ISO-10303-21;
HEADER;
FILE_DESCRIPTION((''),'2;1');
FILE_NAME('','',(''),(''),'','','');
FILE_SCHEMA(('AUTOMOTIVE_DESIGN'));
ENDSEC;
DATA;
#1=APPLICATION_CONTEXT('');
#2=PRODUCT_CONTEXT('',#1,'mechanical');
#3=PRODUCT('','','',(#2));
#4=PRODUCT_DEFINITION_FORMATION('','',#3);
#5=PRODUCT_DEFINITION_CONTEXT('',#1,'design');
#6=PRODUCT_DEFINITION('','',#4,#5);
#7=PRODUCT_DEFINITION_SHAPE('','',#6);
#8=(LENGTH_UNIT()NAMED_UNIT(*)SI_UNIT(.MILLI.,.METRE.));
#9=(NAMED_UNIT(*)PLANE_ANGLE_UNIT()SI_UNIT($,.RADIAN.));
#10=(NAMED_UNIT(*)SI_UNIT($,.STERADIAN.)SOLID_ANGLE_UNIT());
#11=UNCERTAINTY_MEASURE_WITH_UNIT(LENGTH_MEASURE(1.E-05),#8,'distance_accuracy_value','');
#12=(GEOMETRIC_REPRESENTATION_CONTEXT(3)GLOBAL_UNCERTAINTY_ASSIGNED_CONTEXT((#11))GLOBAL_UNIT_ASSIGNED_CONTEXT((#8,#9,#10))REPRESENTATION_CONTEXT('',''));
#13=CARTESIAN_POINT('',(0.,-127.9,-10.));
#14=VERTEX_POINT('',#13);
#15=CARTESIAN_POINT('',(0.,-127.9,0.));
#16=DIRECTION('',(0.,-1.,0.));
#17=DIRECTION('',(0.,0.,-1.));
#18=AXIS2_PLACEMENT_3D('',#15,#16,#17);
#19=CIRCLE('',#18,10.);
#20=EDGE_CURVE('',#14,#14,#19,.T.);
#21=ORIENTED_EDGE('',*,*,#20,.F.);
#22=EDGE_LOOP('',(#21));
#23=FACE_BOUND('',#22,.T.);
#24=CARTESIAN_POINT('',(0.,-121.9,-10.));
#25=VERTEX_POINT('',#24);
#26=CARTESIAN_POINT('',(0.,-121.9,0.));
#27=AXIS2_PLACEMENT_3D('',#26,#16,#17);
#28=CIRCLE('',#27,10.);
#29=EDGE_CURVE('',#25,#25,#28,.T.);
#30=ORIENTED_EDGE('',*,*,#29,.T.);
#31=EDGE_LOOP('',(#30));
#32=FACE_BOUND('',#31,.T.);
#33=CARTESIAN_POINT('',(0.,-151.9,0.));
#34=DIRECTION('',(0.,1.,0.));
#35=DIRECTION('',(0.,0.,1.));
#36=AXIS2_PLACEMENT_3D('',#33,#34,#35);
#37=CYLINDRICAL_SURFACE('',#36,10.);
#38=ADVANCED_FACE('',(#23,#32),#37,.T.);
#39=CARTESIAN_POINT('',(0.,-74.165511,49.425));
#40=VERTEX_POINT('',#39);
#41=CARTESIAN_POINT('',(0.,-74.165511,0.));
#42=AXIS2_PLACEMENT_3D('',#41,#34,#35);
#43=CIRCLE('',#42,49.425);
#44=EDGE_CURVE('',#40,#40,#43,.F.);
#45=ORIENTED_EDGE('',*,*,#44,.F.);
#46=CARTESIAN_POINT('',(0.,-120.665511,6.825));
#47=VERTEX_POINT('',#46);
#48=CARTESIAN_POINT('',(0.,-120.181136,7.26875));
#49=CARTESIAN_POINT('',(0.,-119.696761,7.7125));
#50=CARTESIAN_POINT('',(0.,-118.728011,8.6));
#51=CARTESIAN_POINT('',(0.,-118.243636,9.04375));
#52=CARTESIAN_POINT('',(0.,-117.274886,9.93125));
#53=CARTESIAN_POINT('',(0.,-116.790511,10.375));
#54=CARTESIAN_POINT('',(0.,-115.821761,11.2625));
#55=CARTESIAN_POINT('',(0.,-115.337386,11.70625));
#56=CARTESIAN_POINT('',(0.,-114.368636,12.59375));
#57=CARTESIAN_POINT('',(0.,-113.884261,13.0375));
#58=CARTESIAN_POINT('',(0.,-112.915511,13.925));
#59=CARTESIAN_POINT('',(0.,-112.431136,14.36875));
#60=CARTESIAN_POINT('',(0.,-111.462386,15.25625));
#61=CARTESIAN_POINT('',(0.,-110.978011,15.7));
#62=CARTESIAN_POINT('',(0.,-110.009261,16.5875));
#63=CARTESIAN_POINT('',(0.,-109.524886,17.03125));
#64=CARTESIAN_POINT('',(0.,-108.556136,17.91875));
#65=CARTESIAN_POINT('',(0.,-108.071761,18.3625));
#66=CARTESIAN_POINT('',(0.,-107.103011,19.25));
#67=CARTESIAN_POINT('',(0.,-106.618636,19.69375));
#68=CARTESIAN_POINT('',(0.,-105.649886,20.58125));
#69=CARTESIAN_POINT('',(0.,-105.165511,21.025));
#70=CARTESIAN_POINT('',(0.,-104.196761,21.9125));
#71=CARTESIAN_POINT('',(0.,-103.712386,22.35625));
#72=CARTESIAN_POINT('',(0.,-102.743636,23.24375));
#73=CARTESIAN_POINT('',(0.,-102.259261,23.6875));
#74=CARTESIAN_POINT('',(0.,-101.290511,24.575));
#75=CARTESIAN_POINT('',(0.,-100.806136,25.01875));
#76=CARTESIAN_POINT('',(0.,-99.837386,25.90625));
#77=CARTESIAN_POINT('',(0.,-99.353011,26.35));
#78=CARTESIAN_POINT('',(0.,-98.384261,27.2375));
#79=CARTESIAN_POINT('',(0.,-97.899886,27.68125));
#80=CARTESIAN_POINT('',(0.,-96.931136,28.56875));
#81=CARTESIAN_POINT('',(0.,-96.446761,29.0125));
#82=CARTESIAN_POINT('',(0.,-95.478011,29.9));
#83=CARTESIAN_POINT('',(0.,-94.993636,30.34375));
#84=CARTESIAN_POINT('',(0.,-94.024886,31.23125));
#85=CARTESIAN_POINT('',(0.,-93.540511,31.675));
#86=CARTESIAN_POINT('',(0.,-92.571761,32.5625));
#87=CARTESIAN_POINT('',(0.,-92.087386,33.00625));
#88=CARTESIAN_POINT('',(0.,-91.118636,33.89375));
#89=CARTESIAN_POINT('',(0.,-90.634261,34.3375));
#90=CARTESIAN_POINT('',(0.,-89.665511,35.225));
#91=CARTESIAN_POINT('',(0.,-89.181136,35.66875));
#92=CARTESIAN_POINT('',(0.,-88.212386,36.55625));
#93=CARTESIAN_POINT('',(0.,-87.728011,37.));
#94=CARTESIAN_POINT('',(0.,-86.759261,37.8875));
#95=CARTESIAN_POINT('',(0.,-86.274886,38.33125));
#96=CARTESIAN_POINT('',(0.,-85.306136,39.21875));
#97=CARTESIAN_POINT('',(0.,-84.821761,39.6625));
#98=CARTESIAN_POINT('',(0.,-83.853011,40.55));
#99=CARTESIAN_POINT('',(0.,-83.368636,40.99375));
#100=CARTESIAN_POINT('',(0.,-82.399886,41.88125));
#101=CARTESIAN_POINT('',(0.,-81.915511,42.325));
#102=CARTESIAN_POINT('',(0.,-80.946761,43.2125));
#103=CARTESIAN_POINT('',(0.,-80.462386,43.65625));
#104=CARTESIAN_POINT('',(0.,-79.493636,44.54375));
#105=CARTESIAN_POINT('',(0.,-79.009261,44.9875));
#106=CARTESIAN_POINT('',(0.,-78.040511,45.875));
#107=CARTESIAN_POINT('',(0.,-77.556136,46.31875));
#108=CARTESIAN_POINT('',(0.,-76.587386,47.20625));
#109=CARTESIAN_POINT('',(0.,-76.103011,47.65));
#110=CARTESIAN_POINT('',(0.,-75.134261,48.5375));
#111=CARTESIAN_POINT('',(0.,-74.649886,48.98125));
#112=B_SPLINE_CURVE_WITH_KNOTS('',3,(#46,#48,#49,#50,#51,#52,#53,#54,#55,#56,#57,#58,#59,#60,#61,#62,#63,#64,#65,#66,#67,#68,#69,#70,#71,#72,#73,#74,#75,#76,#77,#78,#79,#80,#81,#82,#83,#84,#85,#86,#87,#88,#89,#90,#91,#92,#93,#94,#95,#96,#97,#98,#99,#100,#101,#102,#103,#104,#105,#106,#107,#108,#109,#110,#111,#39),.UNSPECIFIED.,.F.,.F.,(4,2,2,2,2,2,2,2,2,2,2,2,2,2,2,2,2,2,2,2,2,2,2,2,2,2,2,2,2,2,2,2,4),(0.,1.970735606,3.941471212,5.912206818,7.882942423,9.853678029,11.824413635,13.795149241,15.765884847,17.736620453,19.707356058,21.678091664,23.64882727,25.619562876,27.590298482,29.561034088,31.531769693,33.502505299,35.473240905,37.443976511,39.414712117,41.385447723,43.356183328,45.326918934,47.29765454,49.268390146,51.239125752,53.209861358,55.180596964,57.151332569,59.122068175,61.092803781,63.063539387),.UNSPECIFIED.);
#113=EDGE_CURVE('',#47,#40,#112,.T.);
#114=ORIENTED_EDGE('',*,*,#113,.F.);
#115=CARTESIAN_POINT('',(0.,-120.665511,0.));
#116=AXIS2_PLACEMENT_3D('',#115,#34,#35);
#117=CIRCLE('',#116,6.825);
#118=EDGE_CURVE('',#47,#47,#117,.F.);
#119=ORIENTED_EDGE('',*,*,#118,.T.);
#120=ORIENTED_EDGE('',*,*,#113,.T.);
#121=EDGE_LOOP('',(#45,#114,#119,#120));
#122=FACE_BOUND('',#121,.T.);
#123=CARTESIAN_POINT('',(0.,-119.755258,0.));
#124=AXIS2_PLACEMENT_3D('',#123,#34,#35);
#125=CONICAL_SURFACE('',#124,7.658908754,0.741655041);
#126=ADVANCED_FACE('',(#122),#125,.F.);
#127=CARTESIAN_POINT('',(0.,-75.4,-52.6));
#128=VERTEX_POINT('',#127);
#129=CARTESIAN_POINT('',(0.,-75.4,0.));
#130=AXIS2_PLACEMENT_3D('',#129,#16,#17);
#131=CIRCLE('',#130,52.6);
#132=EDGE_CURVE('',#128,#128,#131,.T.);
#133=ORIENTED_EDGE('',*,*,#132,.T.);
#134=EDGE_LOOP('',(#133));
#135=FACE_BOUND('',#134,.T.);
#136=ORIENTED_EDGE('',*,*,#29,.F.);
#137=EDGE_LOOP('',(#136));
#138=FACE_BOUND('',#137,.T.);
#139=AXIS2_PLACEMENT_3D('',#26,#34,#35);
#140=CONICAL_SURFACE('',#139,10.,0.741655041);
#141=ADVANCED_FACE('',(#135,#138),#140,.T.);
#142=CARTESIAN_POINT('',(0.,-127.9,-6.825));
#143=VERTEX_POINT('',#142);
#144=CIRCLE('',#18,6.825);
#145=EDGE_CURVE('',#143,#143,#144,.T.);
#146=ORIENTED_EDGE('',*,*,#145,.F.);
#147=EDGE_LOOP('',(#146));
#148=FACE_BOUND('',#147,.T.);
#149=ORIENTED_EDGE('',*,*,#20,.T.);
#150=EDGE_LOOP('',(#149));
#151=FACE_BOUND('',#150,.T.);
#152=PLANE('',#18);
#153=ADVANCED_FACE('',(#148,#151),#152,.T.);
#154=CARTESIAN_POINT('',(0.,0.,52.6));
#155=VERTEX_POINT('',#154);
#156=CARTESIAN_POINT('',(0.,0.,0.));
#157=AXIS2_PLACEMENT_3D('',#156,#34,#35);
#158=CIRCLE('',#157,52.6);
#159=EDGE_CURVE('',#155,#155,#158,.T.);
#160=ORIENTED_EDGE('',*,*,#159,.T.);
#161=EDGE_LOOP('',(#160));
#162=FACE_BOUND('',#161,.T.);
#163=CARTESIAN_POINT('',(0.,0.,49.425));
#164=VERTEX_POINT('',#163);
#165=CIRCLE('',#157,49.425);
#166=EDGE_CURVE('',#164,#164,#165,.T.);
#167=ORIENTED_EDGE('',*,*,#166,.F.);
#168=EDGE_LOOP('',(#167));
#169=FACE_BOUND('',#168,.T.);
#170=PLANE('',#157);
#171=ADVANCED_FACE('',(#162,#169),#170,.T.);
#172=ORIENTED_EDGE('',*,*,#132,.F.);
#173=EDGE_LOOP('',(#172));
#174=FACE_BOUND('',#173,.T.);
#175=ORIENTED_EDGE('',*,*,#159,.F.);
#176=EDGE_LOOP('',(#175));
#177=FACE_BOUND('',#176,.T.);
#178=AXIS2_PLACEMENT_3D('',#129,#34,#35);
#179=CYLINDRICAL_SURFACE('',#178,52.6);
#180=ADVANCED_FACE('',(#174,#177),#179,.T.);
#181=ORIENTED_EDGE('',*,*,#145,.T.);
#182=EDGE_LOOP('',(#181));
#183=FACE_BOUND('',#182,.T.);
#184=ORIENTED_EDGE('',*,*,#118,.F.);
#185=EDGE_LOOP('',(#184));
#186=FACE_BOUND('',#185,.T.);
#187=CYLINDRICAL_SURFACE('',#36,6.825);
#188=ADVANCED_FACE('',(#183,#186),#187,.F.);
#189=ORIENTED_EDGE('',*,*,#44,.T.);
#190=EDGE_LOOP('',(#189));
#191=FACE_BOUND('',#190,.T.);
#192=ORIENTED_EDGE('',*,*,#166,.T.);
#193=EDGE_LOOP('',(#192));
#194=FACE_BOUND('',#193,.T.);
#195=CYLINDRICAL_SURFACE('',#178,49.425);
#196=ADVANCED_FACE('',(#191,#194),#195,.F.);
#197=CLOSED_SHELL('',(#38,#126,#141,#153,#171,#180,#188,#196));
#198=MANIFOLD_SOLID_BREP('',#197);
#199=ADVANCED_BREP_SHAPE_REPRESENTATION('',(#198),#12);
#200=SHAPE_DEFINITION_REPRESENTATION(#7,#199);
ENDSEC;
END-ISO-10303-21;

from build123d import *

# Parameters (mm, degrees)
CROQUIS1_R              = 52.6
SALIENTE_EXTRUIR1_DEPTH = 75.4
CROQUIS3_R              = 10
CROQUIS2_R              = 52.6
CROQUIS4_R              = 10
SALIENTE_EXTRUIR2_DEPTH = 30
CROQUIS7_R              = 17.5
CORTAR_EXTRUIR2_DEPTH   = 24


# Read off the part's stored shape, not the designer's step: Vaciado2
with BuildPart() as part:
    # Croquis1 → Saliente-Extruir1 (new body)
    with BuildSketch(Plane(origin=(0, 0, 0), x_dir=(1, 0, 0), z_dir=(0, 1, 0))):
        with Locations(Location((0, 0, 0), (0, 0, 270))):
            Circle(CROQUIS1_R)
    extrude(amount=-SALIENTE_EXTRUIR1_DEPTH)

    # Croquis3 → Recubrir1 section 0
    with BuildSketch(Plane(origin=(0, -121.9, 0), x_dir=(1, 0, 0), z_dir=(0, 1, 0))):
        Circle(CROQUIS3_R)
    # Croquis2 → Recubrir1 section 1
    with BuildSketch(Plane.XZ.offset(75.4)):
        Circle(CROQUIS2_R)
    loft()

    # Croquis4 → Saliente-Extruir2 (add)
    with BuildSketch(Plane.XZ.offset(121.9)):
        with Locations(Location((0, 0, 0), (0, 0, 270))):
            Circle(CROQUIS4_R)
    extrude(amount=SALIENTE_EXTRUIR2_DEPTH)

    # Croquis7 → Cortar-Extruir2 (cut)
    with BuildSketch(Plane.XZ.offset(151.9)):
        Circle(CROQUIS7_R)
    extrude(amount=-CORTAR_EXTRUIR2_DEPTH, mode=Mode.SUBTRACT)

    # Vaciado2 outline → Vaciado2 (revolve, cut)
    with BuildSketch(Plane.XY):
        Polygon((0, -127.9), (6.825, -127.9), (6.825, -120.665510856), (49.425, -74.165510856), (49.425, 0), (0, 0), align=None)
    revolve(axis=Axis((0, 0, 0), (0, 1, 0)), mode=Mode.SUBTRACT)


solid = part.part
